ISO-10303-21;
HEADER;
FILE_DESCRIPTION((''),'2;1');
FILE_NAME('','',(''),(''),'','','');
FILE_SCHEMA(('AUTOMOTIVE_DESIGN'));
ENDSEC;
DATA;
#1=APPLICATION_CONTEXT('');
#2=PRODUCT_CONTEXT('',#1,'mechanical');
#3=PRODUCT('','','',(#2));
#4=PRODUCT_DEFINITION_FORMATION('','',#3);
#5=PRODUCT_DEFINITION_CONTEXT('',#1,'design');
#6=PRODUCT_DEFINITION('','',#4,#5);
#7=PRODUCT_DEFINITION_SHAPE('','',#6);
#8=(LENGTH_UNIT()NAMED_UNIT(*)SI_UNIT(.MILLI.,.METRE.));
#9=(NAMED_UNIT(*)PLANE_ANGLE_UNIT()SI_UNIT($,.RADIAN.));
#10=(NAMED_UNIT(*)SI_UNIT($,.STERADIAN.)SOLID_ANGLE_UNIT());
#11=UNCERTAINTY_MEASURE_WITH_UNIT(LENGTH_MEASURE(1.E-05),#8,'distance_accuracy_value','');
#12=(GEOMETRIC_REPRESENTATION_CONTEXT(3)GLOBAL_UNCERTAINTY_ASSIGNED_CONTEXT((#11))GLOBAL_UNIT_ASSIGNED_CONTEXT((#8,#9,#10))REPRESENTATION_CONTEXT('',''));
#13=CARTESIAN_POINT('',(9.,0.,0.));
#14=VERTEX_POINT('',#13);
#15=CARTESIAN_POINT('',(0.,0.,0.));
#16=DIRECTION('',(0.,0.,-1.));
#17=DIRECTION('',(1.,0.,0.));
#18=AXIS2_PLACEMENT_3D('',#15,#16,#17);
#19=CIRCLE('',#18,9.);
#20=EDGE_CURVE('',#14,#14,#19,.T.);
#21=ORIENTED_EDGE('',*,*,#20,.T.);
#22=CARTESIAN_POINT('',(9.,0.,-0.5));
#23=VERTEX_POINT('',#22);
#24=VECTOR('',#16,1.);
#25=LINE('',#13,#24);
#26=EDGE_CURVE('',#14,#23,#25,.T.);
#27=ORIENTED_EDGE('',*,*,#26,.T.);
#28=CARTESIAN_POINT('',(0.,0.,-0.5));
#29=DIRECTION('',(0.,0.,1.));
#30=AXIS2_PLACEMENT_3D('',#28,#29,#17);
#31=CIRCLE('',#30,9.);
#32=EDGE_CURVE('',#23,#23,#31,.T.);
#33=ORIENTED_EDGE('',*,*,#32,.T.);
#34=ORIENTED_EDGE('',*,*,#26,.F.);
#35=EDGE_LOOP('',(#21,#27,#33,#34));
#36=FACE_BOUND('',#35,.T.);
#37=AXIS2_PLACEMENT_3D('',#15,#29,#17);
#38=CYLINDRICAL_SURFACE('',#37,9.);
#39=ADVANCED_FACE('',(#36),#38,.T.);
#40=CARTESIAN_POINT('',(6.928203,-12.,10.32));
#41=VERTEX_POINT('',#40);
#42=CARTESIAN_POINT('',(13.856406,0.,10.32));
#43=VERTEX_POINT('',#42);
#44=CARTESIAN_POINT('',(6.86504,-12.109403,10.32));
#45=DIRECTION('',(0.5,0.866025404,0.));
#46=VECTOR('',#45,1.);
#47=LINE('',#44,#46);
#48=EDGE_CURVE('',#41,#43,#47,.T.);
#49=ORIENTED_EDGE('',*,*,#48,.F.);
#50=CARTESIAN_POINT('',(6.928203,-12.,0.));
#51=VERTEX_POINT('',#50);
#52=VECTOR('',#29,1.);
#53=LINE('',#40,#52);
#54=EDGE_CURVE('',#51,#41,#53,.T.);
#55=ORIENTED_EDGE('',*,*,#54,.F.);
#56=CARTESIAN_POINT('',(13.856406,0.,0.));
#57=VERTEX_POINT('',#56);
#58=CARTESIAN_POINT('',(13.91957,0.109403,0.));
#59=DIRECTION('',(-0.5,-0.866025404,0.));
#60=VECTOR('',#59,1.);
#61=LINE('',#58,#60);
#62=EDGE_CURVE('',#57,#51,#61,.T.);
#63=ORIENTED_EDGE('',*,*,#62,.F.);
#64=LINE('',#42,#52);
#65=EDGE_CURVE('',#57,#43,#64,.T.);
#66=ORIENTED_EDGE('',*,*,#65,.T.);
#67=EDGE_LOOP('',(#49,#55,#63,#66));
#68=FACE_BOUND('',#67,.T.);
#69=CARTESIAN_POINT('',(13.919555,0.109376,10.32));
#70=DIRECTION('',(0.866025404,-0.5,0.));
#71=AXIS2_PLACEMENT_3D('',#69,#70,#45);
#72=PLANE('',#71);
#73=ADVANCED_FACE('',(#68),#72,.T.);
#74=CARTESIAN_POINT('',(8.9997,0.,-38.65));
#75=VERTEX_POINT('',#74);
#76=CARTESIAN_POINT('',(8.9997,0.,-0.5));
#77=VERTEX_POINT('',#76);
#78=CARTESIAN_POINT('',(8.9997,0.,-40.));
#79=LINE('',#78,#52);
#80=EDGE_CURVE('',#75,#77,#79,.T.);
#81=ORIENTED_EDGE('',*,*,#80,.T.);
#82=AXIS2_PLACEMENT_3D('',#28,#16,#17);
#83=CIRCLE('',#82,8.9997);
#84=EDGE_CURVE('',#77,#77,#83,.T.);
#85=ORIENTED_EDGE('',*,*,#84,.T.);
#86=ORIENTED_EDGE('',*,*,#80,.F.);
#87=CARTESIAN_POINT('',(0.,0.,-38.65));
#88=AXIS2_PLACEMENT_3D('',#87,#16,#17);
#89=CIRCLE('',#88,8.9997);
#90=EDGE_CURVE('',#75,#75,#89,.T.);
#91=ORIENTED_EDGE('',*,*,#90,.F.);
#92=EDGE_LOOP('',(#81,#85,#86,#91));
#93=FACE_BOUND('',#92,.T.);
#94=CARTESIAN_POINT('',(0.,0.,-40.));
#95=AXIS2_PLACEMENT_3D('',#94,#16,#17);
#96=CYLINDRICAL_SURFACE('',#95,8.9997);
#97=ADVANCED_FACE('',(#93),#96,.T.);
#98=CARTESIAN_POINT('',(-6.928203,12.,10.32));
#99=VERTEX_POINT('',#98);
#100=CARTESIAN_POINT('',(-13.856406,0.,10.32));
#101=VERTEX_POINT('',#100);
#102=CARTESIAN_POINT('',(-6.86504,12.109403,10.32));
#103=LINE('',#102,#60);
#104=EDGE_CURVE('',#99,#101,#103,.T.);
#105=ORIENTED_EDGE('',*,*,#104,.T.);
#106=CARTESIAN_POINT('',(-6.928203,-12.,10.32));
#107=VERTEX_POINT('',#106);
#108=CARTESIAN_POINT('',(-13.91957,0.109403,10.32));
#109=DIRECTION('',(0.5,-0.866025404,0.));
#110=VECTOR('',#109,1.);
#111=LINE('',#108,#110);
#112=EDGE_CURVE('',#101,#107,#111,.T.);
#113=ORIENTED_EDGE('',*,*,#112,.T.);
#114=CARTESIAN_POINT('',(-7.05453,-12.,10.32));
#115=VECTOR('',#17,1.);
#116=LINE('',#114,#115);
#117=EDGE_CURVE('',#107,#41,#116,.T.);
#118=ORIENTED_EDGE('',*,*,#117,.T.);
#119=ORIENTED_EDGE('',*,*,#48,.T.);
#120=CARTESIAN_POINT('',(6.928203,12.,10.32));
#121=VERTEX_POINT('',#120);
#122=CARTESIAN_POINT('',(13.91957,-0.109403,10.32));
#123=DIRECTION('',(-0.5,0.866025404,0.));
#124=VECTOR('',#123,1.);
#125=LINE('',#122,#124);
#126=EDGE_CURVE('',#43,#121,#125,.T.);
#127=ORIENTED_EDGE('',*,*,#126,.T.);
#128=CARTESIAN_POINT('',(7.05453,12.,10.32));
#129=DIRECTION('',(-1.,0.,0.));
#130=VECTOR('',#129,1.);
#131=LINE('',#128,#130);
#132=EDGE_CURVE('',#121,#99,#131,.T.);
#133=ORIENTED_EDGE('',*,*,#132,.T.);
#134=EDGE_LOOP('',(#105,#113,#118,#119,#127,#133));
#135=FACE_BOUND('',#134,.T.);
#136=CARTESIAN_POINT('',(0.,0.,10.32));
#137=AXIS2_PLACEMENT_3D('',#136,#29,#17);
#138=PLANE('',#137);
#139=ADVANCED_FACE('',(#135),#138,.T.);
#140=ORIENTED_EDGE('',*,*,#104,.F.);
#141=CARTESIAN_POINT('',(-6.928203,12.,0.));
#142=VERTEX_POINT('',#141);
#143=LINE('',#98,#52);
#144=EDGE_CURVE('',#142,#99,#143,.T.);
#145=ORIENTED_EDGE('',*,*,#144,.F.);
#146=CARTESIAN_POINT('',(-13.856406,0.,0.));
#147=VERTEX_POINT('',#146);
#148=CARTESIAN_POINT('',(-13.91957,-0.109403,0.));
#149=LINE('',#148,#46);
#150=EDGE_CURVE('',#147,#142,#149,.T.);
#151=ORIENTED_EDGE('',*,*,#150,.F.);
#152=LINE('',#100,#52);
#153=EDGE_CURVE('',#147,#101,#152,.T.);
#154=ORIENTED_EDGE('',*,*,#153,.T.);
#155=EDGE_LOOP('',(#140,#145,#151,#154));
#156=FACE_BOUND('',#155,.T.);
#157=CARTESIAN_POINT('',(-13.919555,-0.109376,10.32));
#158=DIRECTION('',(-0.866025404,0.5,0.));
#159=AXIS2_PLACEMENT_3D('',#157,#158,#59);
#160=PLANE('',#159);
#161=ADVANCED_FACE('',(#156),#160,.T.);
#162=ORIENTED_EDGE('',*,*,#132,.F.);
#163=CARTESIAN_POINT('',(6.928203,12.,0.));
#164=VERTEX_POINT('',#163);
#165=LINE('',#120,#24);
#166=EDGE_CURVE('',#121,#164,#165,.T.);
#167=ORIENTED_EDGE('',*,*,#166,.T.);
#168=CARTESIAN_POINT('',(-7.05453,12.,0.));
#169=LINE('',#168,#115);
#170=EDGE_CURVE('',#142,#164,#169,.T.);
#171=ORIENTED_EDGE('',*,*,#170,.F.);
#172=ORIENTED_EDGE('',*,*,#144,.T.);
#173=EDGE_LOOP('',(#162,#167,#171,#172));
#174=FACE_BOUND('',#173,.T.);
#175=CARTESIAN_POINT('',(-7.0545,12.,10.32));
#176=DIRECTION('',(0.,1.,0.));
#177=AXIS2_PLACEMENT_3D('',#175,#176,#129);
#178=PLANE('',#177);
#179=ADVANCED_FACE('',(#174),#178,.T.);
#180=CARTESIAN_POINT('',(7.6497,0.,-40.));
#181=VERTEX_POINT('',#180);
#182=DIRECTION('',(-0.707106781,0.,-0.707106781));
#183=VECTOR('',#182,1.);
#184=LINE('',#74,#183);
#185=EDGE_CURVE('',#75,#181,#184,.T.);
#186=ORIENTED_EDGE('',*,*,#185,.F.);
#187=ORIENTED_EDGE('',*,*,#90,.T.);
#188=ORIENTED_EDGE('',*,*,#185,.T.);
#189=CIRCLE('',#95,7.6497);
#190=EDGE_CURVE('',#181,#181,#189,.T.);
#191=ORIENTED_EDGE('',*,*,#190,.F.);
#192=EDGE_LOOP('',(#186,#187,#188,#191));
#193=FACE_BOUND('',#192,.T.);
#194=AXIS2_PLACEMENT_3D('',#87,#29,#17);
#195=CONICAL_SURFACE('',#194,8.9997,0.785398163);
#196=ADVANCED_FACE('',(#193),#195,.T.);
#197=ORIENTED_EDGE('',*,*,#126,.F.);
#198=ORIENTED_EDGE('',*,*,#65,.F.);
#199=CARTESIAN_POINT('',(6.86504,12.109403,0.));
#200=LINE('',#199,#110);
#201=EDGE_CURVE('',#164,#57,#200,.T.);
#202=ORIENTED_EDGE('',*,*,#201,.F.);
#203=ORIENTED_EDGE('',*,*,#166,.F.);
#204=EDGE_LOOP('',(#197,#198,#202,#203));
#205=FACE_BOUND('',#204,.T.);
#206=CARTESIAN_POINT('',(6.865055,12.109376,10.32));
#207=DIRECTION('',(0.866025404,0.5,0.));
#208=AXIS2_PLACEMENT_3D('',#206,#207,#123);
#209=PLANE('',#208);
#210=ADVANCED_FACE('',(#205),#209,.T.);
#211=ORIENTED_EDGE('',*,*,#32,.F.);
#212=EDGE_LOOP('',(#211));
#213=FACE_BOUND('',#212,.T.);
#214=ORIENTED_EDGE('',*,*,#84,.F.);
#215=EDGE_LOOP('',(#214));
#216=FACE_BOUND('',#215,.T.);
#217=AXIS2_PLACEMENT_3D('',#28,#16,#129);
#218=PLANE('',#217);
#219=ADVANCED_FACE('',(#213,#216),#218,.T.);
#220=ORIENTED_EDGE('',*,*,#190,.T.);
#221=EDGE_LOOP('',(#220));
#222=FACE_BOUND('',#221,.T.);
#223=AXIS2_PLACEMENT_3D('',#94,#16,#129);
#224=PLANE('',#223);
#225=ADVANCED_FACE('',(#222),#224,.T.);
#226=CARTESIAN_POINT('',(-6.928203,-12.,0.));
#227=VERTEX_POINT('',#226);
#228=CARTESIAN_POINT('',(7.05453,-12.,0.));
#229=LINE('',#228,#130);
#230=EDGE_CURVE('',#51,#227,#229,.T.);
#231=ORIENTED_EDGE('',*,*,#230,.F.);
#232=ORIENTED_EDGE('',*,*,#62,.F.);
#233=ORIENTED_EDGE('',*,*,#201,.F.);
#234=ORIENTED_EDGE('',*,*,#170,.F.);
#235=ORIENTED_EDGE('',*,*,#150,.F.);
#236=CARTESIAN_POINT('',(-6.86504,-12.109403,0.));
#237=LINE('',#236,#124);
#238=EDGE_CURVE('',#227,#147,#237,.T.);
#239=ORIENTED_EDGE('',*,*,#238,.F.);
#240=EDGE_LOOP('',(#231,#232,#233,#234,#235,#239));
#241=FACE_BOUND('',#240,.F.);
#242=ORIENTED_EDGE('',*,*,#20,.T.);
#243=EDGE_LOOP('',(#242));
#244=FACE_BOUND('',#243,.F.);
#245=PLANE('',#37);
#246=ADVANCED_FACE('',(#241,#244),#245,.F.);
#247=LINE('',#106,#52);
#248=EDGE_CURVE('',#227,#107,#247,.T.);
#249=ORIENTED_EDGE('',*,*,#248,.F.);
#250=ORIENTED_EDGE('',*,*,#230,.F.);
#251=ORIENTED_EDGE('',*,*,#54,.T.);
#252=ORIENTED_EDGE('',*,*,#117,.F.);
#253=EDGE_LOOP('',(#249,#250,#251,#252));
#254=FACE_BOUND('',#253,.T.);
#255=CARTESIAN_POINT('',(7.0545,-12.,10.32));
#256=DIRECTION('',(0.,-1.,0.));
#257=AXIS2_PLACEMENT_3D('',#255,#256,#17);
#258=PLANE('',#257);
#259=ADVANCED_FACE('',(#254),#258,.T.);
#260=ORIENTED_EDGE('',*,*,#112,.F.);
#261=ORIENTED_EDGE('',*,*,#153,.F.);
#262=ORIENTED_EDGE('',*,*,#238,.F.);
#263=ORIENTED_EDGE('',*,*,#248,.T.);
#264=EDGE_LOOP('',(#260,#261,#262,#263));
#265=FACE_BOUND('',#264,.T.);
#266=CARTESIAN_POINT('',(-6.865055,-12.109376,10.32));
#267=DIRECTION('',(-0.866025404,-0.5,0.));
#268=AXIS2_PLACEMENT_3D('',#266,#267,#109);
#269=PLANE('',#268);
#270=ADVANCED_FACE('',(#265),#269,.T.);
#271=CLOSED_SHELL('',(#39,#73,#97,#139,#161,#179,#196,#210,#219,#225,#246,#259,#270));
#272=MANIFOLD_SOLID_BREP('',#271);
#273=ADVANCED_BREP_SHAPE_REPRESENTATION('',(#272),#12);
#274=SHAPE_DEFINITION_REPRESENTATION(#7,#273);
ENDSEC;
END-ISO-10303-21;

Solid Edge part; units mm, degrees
sketch "Sketch1" plane through (0, 0, 0) normal (0, 0, 1) x (1, 0, 0)
  circle A0 centre (0, 0) radius 13.92
  dimension "D1" = 27.84
extrude "Protrusion1" add sketch "Sketch1" along normal blind 10.32
sketch "Sketch2" plane through (0, 0, 0) normal (0, 0, -1) x (1, 0, 0)
  circle A0 centre (0, 0) radius 9
extrude "Protrusion2" add sketch "Sketch2" along normal blind 40
sketch "Sketch3" plane through (0, 0, -40) normal (0, 0, -1) x (1, 0, 0)
  circle A0 centre (0, 0) radius 8.9997
extrude "Cutout1" cut sketch "Sketch3" against normal blind 39.5 flip side to cut
chamfer "Chamfer_1" distance 1.35 angle 45 1 edges at (-8.9997, 0, -40)
sketch "Sketch4" plane through (0, 0, 10.32) normal (0, 0, 1) x (1, 0, 0)
  line L0 (-7.0545, 12) -> (7.0545, 12)
  dimension "D1" = 24
extrude "Cutout2" cut sketch "Sketch4" against normal up to next material side at (0, 12.05, 10.32)
pattern_circular "Pattern1" count 6 over 360 about axis through (0, 0, 10.32) along (0, 0, 1) of "Cutout2"
properties part number "24101922"
